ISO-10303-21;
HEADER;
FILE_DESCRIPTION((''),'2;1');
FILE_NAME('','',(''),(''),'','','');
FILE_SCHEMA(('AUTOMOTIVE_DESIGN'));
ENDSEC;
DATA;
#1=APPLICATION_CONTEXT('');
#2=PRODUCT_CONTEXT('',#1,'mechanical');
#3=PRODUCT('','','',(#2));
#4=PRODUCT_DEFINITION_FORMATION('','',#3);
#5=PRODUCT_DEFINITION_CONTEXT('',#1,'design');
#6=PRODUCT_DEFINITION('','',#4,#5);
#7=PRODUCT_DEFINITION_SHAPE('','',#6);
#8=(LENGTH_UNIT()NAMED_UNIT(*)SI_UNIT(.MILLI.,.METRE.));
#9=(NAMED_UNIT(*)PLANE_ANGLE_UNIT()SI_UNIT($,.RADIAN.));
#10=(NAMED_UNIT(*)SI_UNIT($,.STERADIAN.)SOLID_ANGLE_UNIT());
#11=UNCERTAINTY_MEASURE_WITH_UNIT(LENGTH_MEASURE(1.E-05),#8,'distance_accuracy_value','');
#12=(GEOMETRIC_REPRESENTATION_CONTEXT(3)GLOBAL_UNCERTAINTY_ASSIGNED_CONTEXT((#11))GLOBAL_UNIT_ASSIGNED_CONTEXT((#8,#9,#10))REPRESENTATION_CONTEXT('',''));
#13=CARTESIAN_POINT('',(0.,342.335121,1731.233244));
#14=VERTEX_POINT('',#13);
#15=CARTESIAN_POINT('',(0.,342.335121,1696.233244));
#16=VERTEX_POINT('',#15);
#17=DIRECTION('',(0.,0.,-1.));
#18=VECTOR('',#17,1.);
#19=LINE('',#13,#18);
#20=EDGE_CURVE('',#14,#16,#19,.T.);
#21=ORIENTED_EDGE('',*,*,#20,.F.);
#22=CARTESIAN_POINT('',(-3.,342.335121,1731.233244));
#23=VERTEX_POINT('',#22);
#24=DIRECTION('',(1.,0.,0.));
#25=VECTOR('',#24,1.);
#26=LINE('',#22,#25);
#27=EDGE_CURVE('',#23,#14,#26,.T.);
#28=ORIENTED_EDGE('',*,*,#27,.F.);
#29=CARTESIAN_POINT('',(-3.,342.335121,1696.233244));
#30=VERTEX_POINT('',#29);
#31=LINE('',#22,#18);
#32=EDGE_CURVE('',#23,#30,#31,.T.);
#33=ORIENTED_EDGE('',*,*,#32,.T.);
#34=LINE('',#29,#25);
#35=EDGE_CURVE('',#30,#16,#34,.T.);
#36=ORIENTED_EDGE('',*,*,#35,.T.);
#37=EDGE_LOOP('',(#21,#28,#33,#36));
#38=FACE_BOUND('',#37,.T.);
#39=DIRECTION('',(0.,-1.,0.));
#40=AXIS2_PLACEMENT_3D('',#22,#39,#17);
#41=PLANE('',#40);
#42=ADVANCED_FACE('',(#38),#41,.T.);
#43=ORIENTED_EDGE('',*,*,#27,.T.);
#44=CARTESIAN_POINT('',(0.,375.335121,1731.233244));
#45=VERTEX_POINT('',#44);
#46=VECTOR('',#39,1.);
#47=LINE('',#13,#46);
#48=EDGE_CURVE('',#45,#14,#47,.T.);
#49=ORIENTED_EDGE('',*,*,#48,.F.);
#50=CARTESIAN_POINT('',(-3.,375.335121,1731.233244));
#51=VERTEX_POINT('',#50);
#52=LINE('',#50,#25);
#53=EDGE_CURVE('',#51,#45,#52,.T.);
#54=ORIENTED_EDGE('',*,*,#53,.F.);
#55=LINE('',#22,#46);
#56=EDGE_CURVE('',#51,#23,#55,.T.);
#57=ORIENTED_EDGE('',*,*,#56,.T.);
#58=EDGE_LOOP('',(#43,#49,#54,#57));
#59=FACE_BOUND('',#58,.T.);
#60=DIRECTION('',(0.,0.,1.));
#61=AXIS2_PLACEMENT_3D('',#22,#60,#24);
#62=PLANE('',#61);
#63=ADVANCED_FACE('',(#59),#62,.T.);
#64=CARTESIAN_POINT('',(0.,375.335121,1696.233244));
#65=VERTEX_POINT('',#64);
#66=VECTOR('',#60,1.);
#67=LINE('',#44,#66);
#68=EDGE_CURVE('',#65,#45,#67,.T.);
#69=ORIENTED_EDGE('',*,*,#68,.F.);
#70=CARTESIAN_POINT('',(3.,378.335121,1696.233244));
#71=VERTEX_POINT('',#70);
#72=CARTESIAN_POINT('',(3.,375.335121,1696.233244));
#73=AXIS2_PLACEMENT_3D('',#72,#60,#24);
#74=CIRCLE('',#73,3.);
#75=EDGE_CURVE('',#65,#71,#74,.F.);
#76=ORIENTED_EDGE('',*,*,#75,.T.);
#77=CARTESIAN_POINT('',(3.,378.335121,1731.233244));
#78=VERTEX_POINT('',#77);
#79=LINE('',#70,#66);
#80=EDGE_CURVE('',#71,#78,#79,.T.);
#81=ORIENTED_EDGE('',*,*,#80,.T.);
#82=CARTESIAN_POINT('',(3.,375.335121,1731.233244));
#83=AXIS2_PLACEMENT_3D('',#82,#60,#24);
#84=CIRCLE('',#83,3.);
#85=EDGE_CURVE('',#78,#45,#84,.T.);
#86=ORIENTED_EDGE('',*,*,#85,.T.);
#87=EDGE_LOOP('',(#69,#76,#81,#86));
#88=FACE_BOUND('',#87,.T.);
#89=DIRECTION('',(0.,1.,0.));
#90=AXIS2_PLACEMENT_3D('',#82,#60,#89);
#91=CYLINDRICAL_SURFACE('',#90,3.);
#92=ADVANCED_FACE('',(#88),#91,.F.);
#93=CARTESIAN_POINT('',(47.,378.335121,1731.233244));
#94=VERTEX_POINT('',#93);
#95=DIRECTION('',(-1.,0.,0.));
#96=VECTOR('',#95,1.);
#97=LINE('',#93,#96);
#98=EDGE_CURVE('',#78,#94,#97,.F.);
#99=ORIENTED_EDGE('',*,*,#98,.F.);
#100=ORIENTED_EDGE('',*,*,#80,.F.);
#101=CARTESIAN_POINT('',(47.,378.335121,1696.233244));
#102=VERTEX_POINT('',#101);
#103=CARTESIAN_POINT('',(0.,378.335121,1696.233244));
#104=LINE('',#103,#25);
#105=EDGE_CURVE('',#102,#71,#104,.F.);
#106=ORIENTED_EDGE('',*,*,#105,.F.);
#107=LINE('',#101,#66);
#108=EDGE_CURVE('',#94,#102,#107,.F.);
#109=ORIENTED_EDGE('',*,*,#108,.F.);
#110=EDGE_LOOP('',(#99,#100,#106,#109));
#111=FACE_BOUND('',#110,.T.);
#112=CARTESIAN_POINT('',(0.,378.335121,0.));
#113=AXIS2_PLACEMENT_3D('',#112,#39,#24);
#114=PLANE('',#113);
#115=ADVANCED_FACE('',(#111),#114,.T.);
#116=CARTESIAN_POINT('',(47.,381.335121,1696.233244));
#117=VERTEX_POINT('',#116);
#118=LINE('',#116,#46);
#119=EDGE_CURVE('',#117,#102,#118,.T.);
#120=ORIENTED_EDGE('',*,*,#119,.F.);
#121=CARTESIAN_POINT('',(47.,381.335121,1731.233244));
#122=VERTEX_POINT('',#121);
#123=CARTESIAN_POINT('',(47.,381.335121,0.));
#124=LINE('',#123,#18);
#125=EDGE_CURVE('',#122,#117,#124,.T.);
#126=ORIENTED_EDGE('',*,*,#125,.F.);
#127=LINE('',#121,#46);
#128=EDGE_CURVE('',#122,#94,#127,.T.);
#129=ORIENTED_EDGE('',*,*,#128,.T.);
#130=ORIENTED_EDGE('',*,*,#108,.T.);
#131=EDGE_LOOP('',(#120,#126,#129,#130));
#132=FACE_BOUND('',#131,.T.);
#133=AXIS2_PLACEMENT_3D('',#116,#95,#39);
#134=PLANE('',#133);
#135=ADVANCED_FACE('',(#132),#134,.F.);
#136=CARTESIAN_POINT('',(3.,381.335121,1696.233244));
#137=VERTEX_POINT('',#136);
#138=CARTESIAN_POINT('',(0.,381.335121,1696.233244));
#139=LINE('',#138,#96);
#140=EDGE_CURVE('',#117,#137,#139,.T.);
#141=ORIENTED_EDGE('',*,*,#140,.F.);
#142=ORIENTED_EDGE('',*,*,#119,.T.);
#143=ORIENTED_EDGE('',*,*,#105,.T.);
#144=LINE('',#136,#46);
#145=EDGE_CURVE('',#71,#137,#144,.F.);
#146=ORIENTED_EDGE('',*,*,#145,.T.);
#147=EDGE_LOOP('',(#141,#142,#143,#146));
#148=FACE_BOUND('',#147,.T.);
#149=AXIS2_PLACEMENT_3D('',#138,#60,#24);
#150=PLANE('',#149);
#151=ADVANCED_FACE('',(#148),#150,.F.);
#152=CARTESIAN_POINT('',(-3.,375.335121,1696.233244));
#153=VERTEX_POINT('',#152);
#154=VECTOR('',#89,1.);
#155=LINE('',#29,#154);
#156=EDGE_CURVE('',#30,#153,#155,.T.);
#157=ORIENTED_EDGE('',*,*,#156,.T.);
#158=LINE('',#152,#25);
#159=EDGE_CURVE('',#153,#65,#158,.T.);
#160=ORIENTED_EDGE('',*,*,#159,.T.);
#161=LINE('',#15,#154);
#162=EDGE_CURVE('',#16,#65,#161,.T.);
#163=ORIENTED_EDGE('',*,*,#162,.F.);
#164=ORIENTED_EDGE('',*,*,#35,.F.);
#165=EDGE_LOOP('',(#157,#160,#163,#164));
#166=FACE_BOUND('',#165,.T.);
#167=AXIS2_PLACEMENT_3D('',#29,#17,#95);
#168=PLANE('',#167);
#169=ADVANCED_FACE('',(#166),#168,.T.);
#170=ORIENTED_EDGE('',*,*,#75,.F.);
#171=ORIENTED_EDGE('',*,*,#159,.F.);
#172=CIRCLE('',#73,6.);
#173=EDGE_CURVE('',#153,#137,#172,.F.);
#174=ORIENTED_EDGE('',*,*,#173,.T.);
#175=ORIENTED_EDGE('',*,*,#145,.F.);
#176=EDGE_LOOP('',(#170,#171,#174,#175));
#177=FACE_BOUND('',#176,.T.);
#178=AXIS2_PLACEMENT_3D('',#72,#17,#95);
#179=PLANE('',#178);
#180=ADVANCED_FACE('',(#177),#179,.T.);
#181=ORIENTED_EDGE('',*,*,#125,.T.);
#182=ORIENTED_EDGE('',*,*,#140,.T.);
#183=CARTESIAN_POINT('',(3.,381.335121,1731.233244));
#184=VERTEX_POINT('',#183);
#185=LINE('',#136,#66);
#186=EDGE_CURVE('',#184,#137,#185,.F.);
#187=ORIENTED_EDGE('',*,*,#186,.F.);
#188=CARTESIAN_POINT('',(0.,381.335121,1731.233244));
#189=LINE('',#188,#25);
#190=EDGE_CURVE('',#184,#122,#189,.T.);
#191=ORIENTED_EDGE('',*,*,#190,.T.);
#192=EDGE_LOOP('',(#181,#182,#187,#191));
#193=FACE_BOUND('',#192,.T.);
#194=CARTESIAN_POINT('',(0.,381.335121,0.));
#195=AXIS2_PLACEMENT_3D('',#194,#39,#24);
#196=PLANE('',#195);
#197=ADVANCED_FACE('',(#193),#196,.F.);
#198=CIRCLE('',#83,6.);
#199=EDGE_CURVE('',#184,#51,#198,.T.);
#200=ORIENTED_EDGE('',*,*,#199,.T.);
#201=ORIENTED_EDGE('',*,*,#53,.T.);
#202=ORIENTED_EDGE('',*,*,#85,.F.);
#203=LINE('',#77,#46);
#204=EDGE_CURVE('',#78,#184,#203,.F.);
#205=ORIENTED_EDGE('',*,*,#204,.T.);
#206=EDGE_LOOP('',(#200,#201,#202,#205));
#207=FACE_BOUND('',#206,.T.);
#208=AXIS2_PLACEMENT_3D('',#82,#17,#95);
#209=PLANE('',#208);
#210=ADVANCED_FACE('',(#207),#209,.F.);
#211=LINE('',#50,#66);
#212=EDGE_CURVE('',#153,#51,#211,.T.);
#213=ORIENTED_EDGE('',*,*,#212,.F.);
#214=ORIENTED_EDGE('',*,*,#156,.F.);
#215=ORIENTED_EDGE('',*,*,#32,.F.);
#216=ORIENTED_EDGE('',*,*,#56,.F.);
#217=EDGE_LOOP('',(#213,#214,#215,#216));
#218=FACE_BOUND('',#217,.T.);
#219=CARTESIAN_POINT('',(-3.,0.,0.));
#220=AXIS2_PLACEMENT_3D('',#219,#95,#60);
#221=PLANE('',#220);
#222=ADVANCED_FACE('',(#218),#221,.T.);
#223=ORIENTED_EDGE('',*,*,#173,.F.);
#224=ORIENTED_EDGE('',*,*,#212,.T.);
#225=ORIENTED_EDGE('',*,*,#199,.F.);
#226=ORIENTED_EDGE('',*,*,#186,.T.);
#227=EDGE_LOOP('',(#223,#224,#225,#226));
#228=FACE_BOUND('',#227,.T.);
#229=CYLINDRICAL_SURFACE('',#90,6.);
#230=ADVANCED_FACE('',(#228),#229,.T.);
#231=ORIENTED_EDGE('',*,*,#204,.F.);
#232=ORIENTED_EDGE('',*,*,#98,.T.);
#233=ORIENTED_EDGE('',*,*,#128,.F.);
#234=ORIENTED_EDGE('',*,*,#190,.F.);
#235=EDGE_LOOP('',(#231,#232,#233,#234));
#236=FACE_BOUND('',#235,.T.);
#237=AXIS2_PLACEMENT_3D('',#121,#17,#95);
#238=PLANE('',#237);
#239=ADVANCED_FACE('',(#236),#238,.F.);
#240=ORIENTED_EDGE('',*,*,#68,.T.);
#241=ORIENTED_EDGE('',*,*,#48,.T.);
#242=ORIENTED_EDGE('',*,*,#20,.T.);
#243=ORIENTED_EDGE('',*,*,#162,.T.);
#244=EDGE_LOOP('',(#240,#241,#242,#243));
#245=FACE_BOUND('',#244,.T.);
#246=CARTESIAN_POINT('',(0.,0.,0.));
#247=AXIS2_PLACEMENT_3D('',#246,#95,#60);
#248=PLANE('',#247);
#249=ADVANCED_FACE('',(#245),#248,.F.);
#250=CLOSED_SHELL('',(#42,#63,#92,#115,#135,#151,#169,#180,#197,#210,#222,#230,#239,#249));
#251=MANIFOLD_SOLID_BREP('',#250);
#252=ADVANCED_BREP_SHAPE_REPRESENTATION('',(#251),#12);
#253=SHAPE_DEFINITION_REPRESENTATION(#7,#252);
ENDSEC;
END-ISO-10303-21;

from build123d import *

# Parameters (mm, degrees)
SKETCH1_W          = 35
SKETCH1_H          = 33
BASE_FLANGE1_DEPTH = 3
EDGE_FLANGE1_DEPTH = 35


# Sheet-metal steps are written as plain solids
with BuildPart() as part:
    # Sketch1 → Base-Flange1 (new body)
    with BuildSketch(Plane(origin=(0, 0, 0), x_dir=(0, 0, -1), z_dir=(1, 0, 0))):
        with Locations((-1713.733243968, 358.835120643)):
            Rectangle(SKETCH1_W, SKETCH1_H)
    extrude(amount=-BASE_FLANGE1_DEPTH)

    # Edge-Flange1 section (across the edge) → Edge-Flange1 (add)
    with BuildSketch(Plane(origin=(0, 378.335120643, 1696.233243968), x_dir=(0, -1, 0), z_dir=(0, 0, 1))):
        with BuildLine():
            Line((-3, 3), (-3, 47))
            Line((-3, 47), (0, 47))
            Line((0, 47), (0, 3))
            ThreePointArc((0, 3), (0.878679656, 0.878679656), (3, 0))
            Line((3, 0), (3, -3))
            ThreePointArc((3, -3), (-1.242640687, -1.242640687), (-3, 3))
        make_face()
    extrude(amount=EDGE_FLANGE1_DEPTH)


solid = part.part
